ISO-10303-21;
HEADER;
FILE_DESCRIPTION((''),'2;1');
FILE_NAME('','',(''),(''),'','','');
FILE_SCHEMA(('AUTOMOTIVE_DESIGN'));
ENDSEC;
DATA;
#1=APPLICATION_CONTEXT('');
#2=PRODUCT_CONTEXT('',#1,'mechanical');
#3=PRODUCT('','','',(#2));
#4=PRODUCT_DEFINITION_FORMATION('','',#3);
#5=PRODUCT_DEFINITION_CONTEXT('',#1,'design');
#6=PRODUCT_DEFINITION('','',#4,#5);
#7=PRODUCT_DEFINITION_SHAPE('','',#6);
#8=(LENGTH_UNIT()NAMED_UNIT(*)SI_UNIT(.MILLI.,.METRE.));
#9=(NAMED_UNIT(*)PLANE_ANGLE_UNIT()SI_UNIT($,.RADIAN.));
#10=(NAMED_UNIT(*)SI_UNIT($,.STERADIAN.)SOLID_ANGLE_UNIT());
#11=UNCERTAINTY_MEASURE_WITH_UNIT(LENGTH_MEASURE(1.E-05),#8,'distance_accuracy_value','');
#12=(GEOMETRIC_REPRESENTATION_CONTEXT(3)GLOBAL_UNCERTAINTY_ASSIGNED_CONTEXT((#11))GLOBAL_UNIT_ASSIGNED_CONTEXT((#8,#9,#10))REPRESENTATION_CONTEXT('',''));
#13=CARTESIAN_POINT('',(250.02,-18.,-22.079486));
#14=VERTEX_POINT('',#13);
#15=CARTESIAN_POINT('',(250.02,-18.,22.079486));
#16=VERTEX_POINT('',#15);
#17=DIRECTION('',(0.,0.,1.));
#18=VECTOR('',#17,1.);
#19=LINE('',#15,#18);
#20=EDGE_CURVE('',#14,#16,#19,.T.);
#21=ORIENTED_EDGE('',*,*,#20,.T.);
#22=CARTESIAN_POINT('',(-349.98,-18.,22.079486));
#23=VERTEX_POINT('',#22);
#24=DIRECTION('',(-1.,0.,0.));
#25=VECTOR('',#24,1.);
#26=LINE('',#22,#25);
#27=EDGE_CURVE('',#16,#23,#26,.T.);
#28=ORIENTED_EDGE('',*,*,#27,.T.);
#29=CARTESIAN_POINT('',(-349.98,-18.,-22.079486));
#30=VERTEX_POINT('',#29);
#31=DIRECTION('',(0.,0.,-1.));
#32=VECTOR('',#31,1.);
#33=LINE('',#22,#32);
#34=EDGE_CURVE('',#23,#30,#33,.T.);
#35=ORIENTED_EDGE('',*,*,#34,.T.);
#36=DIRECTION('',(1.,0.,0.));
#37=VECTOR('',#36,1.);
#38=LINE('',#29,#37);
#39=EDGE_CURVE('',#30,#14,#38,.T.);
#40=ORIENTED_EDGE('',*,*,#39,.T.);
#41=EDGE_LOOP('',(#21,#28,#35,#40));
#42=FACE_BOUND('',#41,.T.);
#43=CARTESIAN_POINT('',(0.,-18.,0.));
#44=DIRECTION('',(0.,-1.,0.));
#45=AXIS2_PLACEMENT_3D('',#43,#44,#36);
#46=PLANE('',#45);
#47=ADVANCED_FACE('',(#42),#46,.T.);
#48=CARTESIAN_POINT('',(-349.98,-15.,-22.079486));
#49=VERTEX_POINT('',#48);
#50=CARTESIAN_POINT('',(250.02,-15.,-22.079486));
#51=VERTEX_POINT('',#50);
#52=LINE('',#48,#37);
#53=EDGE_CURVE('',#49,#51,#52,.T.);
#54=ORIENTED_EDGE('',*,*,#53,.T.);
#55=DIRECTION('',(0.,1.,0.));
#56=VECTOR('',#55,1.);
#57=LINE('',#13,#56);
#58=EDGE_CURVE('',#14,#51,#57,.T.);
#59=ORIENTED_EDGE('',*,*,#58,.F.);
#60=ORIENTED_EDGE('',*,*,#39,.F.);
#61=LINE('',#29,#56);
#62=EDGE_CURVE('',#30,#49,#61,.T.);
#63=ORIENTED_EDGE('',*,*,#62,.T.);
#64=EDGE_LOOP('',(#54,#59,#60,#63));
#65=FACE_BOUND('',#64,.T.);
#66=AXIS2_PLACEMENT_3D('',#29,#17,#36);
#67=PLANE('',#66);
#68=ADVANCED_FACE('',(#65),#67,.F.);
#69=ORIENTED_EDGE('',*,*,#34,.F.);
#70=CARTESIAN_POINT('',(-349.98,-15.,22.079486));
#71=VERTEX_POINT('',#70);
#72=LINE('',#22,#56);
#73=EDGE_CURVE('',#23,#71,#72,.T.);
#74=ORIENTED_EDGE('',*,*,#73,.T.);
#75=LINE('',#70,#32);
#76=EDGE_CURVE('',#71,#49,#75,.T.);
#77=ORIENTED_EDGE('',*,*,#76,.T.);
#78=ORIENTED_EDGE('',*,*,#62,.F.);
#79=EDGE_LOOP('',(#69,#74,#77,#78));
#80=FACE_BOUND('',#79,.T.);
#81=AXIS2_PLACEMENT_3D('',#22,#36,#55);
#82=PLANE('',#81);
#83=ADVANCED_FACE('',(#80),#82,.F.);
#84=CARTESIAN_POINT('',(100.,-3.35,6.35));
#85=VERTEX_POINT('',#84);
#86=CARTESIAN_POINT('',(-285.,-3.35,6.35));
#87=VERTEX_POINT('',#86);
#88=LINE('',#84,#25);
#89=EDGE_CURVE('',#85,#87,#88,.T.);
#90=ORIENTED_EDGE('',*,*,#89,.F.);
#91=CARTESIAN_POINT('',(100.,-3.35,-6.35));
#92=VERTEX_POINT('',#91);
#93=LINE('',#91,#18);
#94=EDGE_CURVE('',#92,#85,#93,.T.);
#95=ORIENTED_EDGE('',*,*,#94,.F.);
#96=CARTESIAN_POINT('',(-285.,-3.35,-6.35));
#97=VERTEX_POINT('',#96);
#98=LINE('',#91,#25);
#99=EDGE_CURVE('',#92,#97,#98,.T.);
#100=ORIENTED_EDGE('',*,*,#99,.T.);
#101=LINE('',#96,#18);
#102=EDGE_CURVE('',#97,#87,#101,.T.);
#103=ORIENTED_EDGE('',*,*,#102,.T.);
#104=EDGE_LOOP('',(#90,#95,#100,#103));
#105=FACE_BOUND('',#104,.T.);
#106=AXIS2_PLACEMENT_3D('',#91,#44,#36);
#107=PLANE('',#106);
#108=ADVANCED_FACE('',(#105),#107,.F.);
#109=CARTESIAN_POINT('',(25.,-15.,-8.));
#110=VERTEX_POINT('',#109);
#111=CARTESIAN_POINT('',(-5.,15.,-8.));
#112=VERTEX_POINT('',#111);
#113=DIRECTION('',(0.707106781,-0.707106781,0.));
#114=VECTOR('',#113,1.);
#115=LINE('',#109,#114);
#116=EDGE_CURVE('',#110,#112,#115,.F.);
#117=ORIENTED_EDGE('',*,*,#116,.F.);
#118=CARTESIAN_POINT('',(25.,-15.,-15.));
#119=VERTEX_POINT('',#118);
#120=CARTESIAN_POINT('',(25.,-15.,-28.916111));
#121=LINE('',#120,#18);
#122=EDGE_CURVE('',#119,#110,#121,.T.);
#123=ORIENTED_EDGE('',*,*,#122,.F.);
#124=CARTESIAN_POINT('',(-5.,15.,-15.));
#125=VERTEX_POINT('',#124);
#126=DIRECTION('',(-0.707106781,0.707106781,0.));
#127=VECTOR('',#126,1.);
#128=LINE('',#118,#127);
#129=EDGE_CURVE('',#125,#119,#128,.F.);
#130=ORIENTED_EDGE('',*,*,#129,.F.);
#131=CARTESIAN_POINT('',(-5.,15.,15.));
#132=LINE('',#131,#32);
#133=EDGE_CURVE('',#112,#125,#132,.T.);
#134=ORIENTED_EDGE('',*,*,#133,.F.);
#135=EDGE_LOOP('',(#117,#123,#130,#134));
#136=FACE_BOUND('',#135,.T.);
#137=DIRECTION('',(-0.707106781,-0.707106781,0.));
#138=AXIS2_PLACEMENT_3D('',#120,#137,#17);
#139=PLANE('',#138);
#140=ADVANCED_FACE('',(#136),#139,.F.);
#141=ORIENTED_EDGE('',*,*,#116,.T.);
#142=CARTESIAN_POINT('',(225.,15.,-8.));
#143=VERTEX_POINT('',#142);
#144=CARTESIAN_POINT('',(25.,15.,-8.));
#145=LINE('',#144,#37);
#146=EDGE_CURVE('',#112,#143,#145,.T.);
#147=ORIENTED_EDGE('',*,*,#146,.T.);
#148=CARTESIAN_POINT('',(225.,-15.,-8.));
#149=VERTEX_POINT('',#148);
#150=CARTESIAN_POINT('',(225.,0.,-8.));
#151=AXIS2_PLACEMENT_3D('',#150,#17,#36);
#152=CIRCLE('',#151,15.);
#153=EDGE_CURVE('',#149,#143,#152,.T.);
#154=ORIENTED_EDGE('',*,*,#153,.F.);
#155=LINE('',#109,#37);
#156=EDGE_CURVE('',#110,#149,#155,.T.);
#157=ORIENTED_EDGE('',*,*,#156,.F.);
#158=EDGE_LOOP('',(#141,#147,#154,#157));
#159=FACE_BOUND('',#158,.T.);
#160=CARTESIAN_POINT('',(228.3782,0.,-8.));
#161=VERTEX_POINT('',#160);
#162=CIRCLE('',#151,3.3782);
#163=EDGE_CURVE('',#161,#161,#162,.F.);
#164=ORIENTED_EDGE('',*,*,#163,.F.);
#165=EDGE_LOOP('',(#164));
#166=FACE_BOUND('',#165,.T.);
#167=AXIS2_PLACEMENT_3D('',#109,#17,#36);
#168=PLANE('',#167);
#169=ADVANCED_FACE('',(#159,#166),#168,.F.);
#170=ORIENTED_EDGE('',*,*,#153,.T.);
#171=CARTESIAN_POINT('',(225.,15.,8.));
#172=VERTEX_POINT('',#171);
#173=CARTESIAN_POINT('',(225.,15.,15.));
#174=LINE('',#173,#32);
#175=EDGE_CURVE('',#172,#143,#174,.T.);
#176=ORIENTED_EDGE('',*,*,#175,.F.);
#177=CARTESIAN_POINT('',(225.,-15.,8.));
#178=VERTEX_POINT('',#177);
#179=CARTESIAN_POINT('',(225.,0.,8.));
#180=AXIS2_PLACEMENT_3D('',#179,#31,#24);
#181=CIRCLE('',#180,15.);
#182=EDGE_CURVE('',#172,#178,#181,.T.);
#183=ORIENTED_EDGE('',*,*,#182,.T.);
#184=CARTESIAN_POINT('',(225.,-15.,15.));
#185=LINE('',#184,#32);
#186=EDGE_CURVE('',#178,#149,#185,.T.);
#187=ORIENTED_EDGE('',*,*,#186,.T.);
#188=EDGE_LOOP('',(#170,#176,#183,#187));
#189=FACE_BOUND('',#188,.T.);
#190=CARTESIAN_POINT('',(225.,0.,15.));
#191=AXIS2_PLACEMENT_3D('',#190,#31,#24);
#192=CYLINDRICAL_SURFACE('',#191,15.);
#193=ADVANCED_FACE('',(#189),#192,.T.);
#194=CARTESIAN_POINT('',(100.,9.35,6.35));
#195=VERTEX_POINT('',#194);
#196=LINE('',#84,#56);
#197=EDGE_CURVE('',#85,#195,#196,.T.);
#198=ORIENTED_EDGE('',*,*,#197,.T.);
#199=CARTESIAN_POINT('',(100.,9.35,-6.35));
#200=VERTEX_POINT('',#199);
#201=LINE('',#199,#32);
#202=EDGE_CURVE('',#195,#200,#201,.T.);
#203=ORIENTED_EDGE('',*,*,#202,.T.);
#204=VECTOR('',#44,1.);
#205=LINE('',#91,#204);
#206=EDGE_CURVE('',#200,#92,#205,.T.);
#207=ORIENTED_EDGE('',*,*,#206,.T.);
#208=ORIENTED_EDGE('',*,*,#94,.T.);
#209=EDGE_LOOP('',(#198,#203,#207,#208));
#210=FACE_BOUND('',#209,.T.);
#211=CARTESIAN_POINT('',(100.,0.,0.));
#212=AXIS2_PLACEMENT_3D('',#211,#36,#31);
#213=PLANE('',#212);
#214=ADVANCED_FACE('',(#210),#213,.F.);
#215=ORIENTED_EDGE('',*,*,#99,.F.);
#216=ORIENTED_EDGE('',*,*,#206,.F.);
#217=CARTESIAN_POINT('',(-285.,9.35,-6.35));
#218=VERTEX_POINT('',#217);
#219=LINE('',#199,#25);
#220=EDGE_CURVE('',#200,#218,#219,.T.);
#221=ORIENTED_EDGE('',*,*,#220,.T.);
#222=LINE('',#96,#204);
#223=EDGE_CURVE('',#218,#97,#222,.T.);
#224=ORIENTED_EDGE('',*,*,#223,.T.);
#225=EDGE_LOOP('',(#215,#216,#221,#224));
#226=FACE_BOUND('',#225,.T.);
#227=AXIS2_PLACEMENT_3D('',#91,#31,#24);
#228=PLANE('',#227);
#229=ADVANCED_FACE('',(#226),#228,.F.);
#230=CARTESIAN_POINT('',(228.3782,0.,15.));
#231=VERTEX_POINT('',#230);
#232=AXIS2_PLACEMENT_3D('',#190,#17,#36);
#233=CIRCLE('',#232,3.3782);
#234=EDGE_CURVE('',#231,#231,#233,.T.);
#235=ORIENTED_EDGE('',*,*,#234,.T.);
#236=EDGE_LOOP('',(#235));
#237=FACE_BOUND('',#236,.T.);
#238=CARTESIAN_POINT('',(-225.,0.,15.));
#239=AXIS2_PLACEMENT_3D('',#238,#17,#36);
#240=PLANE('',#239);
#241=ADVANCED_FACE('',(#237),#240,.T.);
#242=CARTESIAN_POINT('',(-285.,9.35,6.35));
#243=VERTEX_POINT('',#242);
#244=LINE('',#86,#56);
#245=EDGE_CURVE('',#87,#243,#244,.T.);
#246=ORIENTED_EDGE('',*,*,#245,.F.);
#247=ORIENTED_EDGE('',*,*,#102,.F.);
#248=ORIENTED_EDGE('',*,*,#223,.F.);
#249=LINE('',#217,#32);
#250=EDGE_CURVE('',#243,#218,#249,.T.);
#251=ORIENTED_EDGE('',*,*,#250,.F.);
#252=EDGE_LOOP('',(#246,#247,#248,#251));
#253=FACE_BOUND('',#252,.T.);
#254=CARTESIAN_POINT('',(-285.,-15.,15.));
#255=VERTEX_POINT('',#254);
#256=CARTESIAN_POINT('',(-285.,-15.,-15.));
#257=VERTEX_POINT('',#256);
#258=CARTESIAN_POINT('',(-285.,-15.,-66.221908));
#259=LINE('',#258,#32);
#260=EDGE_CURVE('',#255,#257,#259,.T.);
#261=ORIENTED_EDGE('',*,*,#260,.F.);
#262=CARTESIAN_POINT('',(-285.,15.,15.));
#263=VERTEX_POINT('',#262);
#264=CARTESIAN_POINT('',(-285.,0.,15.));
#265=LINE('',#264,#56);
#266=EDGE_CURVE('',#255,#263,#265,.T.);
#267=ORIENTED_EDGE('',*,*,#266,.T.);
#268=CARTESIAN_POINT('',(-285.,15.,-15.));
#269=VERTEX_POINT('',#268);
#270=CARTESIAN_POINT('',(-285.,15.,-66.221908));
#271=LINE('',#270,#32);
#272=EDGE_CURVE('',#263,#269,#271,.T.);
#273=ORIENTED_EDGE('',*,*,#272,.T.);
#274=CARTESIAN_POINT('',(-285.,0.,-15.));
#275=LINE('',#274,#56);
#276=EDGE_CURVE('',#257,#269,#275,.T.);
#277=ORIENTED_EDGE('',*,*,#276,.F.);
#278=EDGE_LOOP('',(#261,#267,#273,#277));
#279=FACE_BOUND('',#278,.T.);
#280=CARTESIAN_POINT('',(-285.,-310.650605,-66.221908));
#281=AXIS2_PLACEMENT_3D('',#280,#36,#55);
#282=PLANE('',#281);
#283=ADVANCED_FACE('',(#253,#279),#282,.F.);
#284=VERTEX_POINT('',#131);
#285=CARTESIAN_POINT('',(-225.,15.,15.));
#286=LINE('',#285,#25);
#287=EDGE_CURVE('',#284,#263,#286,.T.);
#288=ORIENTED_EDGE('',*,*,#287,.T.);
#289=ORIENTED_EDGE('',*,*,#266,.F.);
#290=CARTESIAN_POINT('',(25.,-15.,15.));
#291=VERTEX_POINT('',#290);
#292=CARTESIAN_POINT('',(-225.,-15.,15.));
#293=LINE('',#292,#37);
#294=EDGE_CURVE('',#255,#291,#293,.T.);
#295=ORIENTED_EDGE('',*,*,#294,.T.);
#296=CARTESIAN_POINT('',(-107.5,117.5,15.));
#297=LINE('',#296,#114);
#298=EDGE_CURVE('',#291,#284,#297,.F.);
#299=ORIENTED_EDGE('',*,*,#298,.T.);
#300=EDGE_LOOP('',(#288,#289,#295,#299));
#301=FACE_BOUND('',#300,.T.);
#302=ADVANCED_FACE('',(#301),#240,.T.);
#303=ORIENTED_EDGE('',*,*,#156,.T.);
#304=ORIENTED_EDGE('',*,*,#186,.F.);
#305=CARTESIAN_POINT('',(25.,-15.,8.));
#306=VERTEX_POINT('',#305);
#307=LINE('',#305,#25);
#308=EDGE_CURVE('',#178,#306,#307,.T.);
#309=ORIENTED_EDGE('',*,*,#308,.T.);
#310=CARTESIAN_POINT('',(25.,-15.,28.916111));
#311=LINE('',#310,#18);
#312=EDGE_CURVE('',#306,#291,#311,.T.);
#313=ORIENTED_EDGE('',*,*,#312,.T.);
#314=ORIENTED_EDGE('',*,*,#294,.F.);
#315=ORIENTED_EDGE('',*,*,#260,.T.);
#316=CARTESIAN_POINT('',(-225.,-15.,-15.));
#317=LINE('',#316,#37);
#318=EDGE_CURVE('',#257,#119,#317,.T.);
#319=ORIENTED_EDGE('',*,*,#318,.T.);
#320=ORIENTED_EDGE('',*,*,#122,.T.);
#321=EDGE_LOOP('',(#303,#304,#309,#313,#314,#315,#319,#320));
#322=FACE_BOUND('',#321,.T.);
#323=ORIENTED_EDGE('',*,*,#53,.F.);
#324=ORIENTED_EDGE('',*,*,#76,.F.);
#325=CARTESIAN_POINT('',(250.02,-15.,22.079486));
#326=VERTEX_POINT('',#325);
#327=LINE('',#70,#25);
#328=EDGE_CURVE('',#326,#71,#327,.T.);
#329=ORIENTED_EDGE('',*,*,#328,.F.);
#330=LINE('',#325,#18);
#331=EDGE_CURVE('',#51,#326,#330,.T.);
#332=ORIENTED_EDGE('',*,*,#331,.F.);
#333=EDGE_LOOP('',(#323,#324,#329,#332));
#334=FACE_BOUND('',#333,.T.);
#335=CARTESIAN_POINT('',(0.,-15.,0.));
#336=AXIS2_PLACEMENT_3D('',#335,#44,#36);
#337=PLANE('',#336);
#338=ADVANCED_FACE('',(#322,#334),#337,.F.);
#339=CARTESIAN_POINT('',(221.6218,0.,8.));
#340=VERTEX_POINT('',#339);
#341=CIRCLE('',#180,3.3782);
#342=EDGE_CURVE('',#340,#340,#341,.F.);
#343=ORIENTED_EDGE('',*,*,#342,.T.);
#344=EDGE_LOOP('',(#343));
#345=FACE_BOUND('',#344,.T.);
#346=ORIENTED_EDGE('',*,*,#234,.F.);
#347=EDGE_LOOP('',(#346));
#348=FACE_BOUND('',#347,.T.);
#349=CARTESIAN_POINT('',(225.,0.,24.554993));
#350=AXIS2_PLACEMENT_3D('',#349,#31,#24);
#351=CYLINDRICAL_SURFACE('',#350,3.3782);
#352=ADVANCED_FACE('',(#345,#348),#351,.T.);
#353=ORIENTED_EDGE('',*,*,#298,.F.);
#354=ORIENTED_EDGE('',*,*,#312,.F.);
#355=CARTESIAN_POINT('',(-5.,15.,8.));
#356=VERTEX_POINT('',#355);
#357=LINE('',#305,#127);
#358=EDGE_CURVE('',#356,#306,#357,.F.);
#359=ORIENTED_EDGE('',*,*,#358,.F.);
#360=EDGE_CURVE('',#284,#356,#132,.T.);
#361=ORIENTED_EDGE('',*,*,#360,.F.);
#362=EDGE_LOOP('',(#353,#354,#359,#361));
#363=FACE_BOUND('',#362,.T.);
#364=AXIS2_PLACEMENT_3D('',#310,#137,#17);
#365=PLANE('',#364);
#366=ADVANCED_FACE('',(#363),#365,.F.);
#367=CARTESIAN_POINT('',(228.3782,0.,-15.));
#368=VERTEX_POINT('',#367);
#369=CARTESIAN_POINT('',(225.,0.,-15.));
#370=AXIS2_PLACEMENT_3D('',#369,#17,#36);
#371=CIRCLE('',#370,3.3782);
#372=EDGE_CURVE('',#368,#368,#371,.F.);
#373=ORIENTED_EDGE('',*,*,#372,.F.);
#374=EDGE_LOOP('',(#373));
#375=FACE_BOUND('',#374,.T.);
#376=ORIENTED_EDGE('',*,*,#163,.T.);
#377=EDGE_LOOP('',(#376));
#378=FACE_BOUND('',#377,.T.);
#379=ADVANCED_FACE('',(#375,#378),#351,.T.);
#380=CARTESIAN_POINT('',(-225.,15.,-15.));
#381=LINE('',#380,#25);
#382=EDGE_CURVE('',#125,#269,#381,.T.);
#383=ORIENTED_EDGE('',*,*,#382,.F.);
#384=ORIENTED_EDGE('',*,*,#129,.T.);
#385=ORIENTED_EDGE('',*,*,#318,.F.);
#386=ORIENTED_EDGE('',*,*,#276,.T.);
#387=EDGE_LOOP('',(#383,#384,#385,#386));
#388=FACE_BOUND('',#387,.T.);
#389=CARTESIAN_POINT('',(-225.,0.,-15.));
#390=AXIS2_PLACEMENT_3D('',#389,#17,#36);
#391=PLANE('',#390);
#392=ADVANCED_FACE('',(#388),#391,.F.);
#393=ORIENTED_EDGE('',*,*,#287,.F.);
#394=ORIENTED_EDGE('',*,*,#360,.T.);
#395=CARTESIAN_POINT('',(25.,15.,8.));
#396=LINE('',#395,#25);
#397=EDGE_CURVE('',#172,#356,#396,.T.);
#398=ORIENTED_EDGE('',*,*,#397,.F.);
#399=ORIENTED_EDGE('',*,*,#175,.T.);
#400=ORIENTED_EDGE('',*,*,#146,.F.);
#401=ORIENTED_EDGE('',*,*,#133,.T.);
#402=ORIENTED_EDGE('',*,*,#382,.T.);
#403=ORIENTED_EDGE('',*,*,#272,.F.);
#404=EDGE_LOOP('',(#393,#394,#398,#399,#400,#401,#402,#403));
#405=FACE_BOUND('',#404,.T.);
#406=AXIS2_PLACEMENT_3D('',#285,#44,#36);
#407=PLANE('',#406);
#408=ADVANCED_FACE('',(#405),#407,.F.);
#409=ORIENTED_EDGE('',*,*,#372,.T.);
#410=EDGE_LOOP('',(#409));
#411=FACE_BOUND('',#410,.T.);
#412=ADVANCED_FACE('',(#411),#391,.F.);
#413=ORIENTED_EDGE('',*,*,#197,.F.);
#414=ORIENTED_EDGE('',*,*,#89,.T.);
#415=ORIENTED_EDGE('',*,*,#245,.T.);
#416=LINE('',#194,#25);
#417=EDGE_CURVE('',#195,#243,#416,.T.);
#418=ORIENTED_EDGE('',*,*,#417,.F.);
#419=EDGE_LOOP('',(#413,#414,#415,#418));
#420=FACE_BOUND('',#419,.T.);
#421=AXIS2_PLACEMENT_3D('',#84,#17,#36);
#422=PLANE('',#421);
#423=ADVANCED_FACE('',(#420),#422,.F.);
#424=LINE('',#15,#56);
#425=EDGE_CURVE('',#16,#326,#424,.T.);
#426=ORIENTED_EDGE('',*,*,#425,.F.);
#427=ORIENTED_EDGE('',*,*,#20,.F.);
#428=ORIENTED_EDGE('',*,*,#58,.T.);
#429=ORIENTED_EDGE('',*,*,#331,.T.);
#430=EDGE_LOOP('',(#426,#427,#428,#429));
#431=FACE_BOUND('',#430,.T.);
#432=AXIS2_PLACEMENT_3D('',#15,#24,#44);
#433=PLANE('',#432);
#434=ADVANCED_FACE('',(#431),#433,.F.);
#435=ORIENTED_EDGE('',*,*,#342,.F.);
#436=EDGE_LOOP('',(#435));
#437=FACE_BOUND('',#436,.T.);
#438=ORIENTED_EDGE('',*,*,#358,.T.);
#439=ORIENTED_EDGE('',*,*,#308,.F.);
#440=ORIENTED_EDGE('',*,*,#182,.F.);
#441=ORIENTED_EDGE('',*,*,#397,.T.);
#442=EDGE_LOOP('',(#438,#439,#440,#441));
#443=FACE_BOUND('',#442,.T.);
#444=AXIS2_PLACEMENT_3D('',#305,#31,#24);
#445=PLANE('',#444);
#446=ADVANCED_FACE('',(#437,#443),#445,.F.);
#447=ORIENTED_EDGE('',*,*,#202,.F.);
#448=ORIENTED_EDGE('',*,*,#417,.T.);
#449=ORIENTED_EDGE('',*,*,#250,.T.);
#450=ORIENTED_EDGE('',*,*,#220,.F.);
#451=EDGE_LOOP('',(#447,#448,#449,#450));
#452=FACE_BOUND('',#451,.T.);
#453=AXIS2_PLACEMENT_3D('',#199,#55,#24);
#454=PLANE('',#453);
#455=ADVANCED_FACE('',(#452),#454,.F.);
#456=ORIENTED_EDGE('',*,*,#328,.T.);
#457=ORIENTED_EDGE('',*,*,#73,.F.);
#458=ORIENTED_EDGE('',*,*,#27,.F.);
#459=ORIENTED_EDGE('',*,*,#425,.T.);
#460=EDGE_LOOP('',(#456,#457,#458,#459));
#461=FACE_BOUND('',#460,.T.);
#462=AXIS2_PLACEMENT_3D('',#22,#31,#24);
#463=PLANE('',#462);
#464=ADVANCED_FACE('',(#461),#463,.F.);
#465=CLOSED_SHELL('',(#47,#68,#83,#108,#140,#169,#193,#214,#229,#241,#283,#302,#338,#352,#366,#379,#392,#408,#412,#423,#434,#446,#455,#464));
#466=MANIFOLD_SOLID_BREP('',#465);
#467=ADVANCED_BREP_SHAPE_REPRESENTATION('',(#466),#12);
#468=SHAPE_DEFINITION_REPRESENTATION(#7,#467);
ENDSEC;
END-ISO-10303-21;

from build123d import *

# Parameters (mm, degrees)
BOSS_EXTRUDE1_DEPTH             = 15
H_0_266_DIAMETER_HOLE1_D        = 6.7564
SKETCH5_W                       = 40
SKETCH5_H                       = 16
SKETCH5_W_2                     = 232
SKETCH5_H_2                     = 20.916111238
CUT_EXTRUDE1_DEPTH              = 243.332416321
SKETCH6_W                       = 237.036778435
SKETCH6_H                       = 127.431795429
CUT_EXTRUDE2_DEPTH              = 243.332416321
SKETCH10_W                      = 30
SKETCH10_H                      = 30
BOSS_EXTRUDE3_DEPTH             = 300
SKETCH11_R                      = 6.35
CUT_EXTRUDE4_DEPTH              = 400
SKETCH13_W                      = 600
SKETCH13_H                      = 44.158972604
BOSS_EXTRUDE4_DEPTH             = 3
SKETCH14_W                      = 268.104744415
SKETCH14_H                      = 124.61591485
CUT_EXTRUDE5_DEPTH              = 30
SKETCH15_W                      = 12.7
SKETCH15_H                      = 12.7
CUT_EXTRUDE6_DEPTH              = 385
BOSS_EXTRUDE5_REACH             = 353.137
SKETCH16_R                      = 3.3782
BOSS_EXTRUDE5_DIRECTION_2_REACH = 353.137
CHAMFER1_SIZE                   = 30


with BuildPart() as part:
    # Sketch1 → Boss-Extrude1 (new, symmetric)
    with BuildSketch(Plane.XY):
        with BuildLine():
            Line((-225, 15), (225, 15))
            ThreePointArc((225, 15), (240, 0), (225, -15))
            Line((225, -15), (-225, -15))
            ThreePointArc((-225, -15), (-240, 0), (-225, 15))
        make_face()
    extrude(amount=BOSS_EXTRUDE1_DEPTH, both=True)

    # H (0.266) Diameter Hole1 (through all)
    with Locations(Plane.XY.offset(15)):
        with Locations((-225, 0), (225, 0)):
            Hole(H_0_266_DIAMETER_HOLE1_D / 2)

    # Sketch5 → Cut-Extrude1 (cut, through all)
    with BuildSketch(Plane(origin=(0, 15, 0), x_dir=(1, 0, 0), z_dir=(0, 1, 0))):
        with Locations((-237, 0)):
            Rectangle(SKETCH5_W, SKETCH5_H)
        with Locations((141, 18.458055619)):
            Rectangle(SKETCH5_W_2, SKETCH5_H_2)
        with Locations((141, -18.458055619)):
            Rectangle(SKETCH5_W_2, SKETCH5_H_2)
    extrude(amount=-CUT_EXTRUDE1_DEPTH, mode=Mode.SUBTRACT)

    # Sketch6 → Cut-Extrude2 (cut, through all)
    with BuildSketch(Plane(origin=(0, 15, 0), x_dir=(1, 0, 0), z_dir=(0, 1, 0))):
        with Locations((-293.518389218, -4.674139215)):
            Rectangle(SKETCH6_W, SKETCH6_H)
    extrude(amount=-CUT_EXTRUDE2_DEPTH, mode=Mode.SUBTRACT)

    # Sketch10 → Boss-Extrude3 (add)
    with BuildSketch(Plane.ZY.offset(175)):
        Rectangle(SKETCH10_W, SKETCH10_H)
    extrude(amount=BOSS_EXTRUDE3_DEPTH)

    # Sketch11 → Cut-Extrude4 (cut)
    with BuildSketch(Plane.ZY.offset(475)):
        with Locations((0, 3)):
            Circle(SKETCH11_R)
    extrude(amount=-CUT_EXTRUDE4_DEPTH, mode=Mode.SUBTRACT)

    # Sketch13 → Boss-Extrude4 (add)
    with BuildSketch(Plane(origin=(0, -15, 0), x_dir=(-1, 0, 0), z_dir=(0, -1, 0))):
        with Locations((49.98, 0)):
            Rectangle(SKETCH13_W, SKETCH13_H)
    extrude(amount=BOSS_EXTRUDE4_DEPTH)

    # Sketch14 → Cut-Extrude5 (cut)
    with BuildSketch(Plane(origin=(0, 15, 0), x_dir=(1, 0, 0), z_dir=(0, 1, 0))):
        with Locations((-419.052372208, 3.913950599)):
            Rectangle(SKETCH14_W, SKETCH14_H)
    extrude(amount=-CUT_EXTRUDE5_DEPTH, mode=Mode.SUBTRACT)

    # Sketch15 → Cut-Extrude6 (cut)
    with BuildSketch(Plane.ZY.offset(285)):
        with Locations((0, 3)):
            Rectangle(SKETCH15_W, SKETCH15_H)
    extrude(amount=-CUT_EXTRUDE6_DEPTH, mode=Mode.SUBTRACT)

    # Boss-Extrude5: up to this face of the body (flat: up to its plane)
    boss_extrude5_end = Plane(part.part.faces().sort_by_distance((-130, 0, 15))[0])
    # Sketch16 → Boss-Extrude5 (add, up to the picked face)
    with BuildSketch(Plane.XY, mode=Mode.PRIVATE) as boss_extrude5_sk1:
        with Locations((225, 0)):
            Circle(SKETCH16_R)
    boss_extrude5_tool1 = split(extrude(boss_extrude5_sk1.sketch, amount=BOSS_EXTRUDE5_REACH, mode=Mode.PRIVATE), bisect_by=boss_extrude5_end, keep=Keep.BOTH, mode=Mode.PRIVATE)
    add(boss_extrude5_tool1.solids().sort_by(Axis((225, 0, 0), (0, 0, 1)))[0])

    # Boss-Extrude5 direction 2: up to this face of the body (flat: up to its plane)
    boss_extrude5_direction_2_end = Plane(part.part.faces().sort_by_distance((-130, 0, -15))[0])
    # Sketch16 → Boss-Extrude5 direction 2 (add, up to the picked face)
    with BuildSketch(Plane.XY, mode=Mode.PRIVATE) as boss_extrude5_direction_2_sk1:
        with Locations((225, 0)):
            Circle(SKETCH16_R)
    boss_extrude5_direction_2_tool1 = split(extrude(boss_extrude5_direction_2_sk1.sketch, amount=-BOSS_EXTRUDE5_DIRECTION_2_REACH, mode=Mode.PRIVATE), bisect_by=boss_extrude5_direction_2_end, keep=Keep.BOTH, mode=Mode.PRIVATE)
    add(boss_extrude5_direction_2_tool1.solids().sort_by(Axis((225, 0, 0), (0, 0, -1)))[0])

    # Chamfer1
    chamfer1_edges = [part.edges().sort_by_distance(p)[0] for p in [
        (25, 15, 11.5),
        (25, 15, -11.5),
    ]]
    chamfer(chamfer1_edges, length=CHAMFER1_SIZE - 0.0001)  # a hair under: the kernel refuses the full size


solid = part.part
